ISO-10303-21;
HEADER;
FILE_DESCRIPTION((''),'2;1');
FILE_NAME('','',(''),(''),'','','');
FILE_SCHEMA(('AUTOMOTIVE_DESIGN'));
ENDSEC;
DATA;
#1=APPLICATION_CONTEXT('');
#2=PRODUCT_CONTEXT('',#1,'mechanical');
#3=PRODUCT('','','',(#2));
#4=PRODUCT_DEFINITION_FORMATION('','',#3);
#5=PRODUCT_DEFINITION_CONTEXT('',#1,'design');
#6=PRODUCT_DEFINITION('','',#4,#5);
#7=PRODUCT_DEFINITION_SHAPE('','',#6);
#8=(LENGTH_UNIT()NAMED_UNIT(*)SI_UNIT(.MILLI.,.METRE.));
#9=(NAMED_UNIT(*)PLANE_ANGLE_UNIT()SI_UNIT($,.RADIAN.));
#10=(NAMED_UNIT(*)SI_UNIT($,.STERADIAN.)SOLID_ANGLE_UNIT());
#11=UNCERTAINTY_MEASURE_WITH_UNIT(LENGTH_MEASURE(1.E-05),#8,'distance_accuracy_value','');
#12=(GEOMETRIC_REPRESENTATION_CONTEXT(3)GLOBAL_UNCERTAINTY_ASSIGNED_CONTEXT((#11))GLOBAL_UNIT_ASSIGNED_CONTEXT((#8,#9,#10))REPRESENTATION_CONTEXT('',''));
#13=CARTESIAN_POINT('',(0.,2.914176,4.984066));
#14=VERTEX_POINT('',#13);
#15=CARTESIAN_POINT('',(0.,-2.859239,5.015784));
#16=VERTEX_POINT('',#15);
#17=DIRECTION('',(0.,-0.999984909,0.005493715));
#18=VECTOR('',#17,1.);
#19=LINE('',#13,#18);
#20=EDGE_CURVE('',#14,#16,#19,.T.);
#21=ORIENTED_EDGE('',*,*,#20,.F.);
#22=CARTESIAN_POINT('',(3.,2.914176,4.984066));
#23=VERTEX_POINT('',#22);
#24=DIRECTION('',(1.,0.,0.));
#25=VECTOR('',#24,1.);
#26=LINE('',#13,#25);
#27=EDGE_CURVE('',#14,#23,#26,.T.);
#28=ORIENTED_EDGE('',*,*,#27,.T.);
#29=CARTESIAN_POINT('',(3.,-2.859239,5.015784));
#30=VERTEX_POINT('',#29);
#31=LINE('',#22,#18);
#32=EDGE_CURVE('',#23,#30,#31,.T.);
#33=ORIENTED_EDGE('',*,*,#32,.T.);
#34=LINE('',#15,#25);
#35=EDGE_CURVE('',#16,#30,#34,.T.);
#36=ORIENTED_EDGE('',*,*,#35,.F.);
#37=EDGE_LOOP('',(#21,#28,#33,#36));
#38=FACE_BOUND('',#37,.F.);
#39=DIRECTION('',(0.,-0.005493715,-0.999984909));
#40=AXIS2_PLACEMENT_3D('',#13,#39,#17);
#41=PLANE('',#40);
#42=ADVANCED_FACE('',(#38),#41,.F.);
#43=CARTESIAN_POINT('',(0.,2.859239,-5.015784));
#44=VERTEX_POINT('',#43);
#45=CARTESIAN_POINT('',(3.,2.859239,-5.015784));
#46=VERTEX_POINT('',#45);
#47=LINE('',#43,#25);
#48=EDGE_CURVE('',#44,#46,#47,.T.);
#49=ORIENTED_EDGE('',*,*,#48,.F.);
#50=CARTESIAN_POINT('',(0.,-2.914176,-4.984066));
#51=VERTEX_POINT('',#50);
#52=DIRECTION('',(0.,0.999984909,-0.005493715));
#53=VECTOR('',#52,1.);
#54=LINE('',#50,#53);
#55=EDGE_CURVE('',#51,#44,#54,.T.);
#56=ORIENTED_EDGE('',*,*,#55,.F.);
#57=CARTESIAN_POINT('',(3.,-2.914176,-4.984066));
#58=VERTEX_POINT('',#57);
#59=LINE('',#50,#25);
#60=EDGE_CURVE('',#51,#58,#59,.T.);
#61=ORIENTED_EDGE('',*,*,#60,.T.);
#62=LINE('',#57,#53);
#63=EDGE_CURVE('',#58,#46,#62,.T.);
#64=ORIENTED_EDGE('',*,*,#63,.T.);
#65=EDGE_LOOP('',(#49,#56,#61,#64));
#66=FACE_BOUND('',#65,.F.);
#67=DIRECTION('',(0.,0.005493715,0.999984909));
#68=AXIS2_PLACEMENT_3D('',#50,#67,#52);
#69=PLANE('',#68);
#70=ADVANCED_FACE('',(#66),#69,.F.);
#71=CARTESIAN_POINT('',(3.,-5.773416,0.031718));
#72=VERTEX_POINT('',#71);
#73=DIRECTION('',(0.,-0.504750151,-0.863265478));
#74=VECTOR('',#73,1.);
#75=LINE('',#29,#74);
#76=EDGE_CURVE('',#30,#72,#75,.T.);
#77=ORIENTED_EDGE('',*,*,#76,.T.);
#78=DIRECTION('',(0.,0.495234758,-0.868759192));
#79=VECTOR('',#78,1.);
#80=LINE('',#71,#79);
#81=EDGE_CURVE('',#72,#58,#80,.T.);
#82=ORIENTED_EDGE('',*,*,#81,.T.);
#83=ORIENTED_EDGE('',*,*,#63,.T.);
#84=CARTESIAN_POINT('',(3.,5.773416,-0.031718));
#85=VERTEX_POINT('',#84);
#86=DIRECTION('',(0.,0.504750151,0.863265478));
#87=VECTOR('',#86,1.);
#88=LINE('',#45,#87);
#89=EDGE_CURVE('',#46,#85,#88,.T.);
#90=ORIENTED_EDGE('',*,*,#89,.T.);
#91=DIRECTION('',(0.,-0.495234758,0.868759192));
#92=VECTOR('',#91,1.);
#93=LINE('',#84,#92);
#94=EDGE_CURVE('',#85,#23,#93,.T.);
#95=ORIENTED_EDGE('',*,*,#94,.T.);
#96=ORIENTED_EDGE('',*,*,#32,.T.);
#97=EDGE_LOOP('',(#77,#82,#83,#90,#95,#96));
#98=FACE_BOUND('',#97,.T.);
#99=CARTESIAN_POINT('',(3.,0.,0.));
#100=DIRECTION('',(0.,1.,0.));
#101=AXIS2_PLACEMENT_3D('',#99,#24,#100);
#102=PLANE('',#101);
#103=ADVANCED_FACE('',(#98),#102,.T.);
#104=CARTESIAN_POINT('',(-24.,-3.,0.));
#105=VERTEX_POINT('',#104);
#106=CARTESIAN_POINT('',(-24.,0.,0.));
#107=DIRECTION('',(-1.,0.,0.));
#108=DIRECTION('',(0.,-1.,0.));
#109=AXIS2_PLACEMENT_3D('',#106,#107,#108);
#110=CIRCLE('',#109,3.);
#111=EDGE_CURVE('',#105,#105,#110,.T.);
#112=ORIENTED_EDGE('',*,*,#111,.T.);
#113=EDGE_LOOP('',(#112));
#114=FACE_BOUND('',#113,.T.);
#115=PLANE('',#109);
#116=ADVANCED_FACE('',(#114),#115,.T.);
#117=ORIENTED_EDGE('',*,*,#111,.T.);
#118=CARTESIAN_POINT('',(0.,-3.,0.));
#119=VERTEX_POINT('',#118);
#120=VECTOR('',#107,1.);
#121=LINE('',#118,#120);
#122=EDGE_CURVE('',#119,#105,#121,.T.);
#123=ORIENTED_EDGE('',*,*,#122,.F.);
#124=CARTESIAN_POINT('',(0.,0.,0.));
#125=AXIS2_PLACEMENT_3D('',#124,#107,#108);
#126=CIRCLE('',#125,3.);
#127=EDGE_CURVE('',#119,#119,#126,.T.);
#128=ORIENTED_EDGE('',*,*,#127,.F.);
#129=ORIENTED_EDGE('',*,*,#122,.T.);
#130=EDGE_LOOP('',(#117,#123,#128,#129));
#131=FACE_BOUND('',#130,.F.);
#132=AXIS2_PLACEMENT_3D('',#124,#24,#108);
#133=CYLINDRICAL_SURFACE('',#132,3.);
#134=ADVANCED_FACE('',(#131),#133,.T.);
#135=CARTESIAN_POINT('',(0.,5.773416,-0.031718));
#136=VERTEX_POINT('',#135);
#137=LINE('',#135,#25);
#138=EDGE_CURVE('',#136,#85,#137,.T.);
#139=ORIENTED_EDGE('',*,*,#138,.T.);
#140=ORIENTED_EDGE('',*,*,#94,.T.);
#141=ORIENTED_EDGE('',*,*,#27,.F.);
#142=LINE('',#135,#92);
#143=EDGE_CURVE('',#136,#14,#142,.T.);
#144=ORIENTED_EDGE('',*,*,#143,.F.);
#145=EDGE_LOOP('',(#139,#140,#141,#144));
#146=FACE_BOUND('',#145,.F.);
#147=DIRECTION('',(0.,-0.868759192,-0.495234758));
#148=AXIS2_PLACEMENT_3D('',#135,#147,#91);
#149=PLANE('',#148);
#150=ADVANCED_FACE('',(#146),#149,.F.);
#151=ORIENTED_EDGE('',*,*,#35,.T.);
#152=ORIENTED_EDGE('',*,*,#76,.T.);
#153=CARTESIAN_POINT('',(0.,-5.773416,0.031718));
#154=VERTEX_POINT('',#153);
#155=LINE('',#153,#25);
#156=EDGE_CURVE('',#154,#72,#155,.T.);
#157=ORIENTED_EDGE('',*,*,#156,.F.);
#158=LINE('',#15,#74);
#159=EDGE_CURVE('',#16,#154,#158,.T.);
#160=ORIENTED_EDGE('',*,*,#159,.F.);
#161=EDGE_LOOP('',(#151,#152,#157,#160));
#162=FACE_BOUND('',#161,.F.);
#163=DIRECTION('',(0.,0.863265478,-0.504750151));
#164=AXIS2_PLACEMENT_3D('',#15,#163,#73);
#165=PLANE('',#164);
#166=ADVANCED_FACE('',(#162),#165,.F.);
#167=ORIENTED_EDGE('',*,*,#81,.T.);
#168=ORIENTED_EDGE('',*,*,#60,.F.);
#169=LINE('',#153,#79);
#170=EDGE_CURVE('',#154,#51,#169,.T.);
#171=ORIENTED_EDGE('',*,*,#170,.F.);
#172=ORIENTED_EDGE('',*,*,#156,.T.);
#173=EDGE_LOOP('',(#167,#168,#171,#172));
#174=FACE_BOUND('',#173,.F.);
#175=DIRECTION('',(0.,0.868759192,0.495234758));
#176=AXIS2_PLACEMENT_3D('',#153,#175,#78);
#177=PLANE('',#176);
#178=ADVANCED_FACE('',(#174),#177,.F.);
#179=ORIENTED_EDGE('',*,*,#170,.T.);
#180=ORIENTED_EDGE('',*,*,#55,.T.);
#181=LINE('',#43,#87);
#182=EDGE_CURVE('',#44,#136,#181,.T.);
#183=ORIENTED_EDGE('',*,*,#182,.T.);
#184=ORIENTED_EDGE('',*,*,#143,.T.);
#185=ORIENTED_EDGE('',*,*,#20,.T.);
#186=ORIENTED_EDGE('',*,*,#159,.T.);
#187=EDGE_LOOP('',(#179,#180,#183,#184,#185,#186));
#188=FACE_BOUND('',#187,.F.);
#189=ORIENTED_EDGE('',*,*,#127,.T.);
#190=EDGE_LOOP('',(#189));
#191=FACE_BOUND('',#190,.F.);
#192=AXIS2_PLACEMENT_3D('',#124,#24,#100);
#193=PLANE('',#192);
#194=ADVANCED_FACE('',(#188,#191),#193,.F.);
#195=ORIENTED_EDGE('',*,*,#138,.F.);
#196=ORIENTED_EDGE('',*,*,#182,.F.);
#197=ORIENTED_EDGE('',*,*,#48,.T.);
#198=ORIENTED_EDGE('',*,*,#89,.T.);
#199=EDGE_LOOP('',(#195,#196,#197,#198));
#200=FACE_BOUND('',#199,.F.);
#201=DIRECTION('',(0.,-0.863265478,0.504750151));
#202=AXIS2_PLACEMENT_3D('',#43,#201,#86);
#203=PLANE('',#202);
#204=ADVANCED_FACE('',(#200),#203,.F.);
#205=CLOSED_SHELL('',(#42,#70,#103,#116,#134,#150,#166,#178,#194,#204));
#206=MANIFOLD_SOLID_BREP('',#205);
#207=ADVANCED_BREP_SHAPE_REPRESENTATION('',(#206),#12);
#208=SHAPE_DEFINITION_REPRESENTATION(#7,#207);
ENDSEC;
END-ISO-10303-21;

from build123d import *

# Parameters (mm, degrees)
F1_DEPTH = 3
F2_R     = 3
F3_DEPTH = 24


# Not quite as in the source:
# - a feature names something its author has since deleted; it is built from what else it names


with BuildPart() as f1:
    # F0 (on Right) → F1 (new body)
    with BuildSketch(Plane.YZ):
        Polygon((5.7734155665, -0.0317179771), (2.9141763572, 4.9840655586), (-2.8592392093, 5.0157835357), (-5.7734155665, 0.0317179771), (-2.9141763572, -4.9840655586), (2.8592392093, -5.0157835357), align=None)
    extrude(amount=F1_DEPTH)

    # F2 (on face) → F3 (join)
    with BuildSketch(Plane(origin=(0, 0, 0), x_dir=(0, -1, 0), z_dir=(-1, 0, 0))):
        Circle(F2_R)
    extrude(amount=F3_DEPTH)


solid = f1.part
